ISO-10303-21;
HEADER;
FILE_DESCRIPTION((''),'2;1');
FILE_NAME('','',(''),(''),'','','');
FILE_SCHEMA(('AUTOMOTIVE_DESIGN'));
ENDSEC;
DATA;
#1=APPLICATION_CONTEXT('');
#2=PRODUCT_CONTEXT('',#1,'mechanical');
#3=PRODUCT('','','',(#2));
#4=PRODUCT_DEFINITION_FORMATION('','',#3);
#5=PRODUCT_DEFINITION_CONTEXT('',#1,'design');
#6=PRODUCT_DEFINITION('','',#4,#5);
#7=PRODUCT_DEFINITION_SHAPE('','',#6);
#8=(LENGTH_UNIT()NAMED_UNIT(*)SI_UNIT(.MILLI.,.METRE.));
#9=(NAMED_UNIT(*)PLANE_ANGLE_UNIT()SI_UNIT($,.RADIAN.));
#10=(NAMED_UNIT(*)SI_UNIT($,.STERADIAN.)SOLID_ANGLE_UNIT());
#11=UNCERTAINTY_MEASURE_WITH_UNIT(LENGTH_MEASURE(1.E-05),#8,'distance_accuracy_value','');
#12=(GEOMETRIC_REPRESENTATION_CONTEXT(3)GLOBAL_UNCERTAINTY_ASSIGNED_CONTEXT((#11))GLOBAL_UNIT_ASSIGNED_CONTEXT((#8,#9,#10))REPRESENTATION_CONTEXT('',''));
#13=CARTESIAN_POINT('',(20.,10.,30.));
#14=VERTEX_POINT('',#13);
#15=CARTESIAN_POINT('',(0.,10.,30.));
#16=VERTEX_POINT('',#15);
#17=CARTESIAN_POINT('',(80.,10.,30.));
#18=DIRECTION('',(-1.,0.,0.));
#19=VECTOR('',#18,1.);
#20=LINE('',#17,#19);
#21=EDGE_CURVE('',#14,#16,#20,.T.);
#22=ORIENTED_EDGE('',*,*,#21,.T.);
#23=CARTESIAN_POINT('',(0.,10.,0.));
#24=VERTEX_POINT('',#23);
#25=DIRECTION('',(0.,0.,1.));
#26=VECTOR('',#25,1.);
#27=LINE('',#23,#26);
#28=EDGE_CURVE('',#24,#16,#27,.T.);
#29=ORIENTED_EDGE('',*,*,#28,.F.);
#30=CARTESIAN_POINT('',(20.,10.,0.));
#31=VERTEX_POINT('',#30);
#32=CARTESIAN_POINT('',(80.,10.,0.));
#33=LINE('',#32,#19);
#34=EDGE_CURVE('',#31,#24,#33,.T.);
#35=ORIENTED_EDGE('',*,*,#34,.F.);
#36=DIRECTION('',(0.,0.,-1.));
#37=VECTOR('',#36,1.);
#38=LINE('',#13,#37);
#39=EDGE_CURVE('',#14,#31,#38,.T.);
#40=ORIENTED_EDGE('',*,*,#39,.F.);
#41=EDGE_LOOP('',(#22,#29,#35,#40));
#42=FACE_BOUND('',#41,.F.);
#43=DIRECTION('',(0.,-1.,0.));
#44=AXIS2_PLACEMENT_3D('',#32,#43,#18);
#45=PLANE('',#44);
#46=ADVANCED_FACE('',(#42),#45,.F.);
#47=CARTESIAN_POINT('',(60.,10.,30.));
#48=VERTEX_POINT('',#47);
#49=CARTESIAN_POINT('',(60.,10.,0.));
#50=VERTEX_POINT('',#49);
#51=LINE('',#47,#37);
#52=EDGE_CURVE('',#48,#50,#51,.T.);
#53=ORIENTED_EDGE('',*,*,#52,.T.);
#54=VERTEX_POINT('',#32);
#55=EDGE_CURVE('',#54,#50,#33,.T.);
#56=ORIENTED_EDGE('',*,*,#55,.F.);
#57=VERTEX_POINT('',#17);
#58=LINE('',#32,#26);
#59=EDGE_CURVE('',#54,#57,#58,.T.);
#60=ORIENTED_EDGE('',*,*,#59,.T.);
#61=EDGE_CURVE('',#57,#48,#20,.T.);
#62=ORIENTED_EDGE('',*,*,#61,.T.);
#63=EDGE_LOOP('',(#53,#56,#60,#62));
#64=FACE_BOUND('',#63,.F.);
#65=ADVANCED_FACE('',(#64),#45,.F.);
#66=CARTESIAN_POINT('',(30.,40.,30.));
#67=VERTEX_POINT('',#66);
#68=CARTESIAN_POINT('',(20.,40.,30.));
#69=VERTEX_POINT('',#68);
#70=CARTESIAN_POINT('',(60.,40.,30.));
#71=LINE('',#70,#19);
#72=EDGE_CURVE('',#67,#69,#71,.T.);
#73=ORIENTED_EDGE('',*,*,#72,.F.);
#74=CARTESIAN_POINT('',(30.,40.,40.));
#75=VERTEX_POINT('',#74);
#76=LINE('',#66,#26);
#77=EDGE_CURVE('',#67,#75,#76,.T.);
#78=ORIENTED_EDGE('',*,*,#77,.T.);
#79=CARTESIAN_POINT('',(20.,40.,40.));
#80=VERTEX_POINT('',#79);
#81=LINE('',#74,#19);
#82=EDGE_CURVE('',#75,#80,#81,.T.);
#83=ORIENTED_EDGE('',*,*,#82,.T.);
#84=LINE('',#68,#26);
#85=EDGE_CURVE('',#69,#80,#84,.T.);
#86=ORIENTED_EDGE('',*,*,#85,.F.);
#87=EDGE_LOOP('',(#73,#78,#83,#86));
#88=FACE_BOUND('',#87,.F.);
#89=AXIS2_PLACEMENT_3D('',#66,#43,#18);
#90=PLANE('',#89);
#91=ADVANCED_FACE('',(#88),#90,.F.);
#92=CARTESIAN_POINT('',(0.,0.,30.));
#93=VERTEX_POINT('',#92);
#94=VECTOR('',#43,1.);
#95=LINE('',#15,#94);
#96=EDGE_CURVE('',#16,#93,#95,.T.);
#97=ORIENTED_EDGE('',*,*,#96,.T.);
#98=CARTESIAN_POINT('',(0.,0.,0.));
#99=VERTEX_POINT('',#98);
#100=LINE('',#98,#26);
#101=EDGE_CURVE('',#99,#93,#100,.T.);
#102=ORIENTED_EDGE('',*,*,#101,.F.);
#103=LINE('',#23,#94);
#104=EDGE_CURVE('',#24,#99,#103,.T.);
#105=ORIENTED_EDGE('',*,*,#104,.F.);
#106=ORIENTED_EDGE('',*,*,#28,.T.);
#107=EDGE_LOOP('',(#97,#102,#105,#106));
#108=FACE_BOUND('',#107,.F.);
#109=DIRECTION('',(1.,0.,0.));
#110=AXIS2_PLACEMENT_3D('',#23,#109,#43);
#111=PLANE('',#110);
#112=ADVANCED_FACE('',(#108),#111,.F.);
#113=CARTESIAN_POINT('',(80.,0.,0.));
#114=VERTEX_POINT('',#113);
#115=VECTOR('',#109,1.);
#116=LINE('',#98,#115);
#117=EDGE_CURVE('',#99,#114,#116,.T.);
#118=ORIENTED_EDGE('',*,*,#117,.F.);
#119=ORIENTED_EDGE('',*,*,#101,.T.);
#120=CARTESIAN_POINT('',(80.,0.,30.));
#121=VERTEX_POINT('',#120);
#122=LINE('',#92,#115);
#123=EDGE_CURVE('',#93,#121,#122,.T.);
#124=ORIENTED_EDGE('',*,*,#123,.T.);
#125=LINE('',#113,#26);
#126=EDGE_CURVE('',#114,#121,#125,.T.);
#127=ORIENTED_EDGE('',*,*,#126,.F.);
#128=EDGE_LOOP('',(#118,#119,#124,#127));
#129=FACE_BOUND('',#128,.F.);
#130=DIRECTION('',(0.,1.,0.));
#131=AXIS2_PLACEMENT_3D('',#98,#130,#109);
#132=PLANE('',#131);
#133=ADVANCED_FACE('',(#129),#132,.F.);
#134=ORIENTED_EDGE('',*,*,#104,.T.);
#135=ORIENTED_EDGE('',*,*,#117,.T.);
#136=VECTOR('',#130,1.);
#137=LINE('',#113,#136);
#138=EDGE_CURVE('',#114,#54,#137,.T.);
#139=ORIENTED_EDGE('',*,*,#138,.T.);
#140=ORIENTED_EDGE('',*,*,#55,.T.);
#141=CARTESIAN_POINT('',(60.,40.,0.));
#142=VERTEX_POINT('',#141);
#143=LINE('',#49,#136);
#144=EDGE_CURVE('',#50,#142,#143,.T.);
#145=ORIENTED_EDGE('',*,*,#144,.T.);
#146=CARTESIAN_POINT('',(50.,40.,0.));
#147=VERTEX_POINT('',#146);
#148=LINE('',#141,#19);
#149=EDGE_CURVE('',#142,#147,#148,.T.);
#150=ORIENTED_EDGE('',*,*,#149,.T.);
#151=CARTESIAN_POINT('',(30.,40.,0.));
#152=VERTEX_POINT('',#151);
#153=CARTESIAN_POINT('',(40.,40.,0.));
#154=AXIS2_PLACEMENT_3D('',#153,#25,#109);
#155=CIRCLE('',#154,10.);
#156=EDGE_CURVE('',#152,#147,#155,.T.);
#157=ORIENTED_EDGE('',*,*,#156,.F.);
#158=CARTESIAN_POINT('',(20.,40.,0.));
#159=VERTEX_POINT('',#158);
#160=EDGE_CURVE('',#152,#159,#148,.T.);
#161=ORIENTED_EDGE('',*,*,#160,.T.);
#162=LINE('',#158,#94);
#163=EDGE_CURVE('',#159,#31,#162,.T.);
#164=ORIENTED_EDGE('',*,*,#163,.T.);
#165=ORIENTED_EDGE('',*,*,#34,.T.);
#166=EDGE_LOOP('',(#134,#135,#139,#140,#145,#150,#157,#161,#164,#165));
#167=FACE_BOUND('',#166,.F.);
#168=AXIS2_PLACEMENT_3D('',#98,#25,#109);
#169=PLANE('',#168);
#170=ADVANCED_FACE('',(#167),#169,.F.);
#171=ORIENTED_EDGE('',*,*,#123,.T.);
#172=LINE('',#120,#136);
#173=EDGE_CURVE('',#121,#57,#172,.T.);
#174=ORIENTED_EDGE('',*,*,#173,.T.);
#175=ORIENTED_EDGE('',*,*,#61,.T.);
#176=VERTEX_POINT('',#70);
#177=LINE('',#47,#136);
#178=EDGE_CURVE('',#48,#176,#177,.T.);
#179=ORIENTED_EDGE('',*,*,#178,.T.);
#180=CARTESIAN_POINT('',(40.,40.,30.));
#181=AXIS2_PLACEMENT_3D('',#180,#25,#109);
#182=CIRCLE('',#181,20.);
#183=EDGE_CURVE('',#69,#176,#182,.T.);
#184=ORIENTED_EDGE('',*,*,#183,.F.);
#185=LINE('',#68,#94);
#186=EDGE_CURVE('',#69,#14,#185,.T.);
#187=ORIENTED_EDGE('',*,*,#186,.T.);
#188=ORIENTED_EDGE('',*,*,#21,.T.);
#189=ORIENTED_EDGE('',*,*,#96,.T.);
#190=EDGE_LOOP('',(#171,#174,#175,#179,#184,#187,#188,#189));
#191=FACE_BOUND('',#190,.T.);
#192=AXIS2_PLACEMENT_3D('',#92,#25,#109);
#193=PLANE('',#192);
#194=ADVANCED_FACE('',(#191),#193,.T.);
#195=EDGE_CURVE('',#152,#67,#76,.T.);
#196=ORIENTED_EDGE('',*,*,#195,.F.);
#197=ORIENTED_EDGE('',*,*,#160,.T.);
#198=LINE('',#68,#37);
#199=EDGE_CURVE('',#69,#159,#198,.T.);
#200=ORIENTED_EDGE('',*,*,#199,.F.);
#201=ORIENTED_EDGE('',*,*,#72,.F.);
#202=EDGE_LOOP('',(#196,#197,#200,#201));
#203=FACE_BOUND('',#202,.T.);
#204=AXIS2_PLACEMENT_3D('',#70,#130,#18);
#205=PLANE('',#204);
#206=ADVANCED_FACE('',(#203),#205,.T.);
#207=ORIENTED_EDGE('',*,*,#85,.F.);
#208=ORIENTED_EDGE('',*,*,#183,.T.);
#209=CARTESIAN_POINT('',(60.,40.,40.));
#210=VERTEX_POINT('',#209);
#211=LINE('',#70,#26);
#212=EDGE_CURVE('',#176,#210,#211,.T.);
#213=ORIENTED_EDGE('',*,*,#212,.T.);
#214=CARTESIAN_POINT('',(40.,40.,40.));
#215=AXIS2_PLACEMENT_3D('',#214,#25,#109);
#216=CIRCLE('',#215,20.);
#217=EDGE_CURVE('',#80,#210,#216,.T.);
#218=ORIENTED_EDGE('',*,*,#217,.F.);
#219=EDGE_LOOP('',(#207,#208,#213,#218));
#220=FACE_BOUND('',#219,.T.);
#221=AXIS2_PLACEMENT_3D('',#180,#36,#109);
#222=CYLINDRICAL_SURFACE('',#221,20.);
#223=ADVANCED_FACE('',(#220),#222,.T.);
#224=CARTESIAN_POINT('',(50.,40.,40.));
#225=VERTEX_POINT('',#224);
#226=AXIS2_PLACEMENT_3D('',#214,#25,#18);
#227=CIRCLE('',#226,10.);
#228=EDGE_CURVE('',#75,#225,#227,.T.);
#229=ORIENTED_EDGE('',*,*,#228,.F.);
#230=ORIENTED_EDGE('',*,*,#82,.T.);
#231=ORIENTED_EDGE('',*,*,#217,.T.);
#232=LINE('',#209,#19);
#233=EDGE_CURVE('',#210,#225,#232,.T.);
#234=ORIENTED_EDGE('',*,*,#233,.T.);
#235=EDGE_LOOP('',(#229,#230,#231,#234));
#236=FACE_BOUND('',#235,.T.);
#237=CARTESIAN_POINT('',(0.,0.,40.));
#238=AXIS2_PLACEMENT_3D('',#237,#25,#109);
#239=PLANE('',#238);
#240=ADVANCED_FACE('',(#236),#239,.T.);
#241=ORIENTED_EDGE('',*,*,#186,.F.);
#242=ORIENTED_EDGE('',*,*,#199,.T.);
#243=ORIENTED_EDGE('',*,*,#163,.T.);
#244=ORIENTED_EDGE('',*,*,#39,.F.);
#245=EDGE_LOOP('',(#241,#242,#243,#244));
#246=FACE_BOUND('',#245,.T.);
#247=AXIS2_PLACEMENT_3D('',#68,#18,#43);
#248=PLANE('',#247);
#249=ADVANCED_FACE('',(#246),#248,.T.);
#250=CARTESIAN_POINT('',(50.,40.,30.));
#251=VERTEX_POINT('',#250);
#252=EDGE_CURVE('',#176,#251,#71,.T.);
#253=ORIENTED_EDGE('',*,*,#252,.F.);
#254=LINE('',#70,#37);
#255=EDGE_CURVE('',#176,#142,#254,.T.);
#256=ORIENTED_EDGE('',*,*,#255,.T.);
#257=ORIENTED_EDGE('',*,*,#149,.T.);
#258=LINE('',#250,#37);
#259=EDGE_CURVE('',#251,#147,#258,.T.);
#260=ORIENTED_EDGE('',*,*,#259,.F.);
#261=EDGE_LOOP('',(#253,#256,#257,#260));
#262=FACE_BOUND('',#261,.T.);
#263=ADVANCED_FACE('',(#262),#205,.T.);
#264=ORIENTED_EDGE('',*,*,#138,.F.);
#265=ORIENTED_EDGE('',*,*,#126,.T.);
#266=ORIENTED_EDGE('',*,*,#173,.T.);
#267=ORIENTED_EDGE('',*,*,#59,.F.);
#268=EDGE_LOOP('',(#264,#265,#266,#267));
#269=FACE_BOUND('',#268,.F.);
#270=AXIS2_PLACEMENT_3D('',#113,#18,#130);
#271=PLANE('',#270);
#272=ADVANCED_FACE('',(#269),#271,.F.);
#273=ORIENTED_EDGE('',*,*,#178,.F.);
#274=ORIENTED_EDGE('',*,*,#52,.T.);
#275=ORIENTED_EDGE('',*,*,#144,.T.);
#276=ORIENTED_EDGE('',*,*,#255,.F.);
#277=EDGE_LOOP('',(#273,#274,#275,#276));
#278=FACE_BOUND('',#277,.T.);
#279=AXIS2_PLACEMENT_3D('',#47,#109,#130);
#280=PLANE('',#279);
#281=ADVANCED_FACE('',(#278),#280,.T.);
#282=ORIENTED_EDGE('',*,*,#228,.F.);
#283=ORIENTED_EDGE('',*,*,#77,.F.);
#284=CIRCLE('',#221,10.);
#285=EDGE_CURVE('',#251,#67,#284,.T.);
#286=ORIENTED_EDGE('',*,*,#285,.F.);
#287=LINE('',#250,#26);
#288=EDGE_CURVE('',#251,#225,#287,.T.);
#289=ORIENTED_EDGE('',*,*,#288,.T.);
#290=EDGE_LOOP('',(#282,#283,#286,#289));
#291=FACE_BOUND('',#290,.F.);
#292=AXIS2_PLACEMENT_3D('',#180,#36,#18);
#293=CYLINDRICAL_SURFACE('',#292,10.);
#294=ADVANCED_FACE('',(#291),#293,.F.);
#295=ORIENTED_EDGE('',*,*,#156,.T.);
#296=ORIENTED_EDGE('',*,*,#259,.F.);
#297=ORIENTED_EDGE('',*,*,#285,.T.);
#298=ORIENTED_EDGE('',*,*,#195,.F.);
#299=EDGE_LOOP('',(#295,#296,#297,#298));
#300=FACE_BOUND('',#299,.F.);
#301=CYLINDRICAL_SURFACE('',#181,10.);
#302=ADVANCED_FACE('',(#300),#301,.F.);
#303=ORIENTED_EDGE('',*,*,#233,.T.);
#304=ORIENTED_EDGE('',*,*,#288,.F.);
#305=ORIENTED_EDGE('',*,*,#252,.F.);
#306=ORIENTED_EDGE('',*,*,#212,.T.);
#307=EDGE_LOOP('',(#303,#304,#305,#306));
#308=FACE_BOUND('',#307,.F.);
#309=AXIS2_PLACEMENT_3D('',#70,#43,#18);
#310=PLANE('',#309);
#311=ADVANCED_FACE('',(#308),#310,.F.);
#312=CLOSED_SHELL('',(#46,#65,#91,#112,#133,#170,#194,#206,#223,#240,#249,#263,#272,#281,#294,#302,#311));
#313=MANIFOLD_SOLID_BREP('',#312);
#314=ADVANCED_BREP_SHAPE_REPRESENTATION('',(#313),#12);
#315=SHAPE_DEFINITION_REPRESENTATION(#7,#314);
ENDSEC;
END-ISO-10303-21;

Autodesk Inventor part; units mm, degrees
ref_plane "YZ Plane" through (0, 0, 0) normal (1, 0, 0) x (0, 1, 0)
ref_plane "XZ Plane" through (0, 0, 0) normal (0, 1, 0) x (-1, 0, 0)
ref_plane "XY Plane" through (0, 0, 0) normal (0, 0, 1) x (1, 0, 0)
sketch "草圖1" plane through (0, 0, 0) normal (0, 0, 1) x (1, 0, 0)
  line L0 (0, 0) -> (80, 0)
  line L1 (80, 0) -> (80, 10)
  line L2 (80, 10) -> (0, 10)
  line L3 (0, 10) -> (0, 0)
  dimension "d0" = 80
  dimension "d1" = 10
extrude "擠出1" add sketch "草圖1" along normal blind 30
sketch "草圖2" plane through (0, 0, 30) normal (0, 0, 1) x (1, 0, 0)
  line L0 (80, 10) -> (0, 10) projected
  line L1 (20, 10) -> (60, 10)
  line L2 (60, 10) -> (60, 40)
  line L3 (60, 40) -> (20, 40)
  line L4 (20, 40) -> (20, 10)
  point P0 (0, 0)
  dimension "d4" = 20
  dimension "d5" = 20
  dimension "d6" = 30
extrude "擠出2" add sketch "草圖2" against normal up to surface (30 mm away)
sketch "草圖3" plane through (0, 0, 30) normal (0, 0, 1) x (1, 0, 0)
  line L0 (60, 40) -> (20, 40) projected
  circle A0 centre (40, 40) radius 10
  point P0 (0, 0)
  dimension "d9" = 20
extrude "擠出3" cut sketch "草圖3" against normal blind 30
sketch "草圖4" plane through (0, 0, 30) normal (0, 0, 1) x (1, 0, 0)
  arc A0 (30, 40) -> (50, 40) centre (40, 40) ccw projected
  line L0 (30, 40) -> (20, 40) projected
  circle A1 centre (40, 40) radius 20
  circle A2 centre (40, 40) radius 10
  line L1 (20, 40) -> (30, 40)
  line L2 (60, 40) -> (50, 40) projected
  line L3 (50, 40) -> (60, 40)
  line L4 (60, 10) -> (60, 40) projected
  point P0 (0, 0)
extrude "擠出4" add sketch "草圖4" along normal blind 10 contours A0 L2 A1 L0
properties part number "1"
